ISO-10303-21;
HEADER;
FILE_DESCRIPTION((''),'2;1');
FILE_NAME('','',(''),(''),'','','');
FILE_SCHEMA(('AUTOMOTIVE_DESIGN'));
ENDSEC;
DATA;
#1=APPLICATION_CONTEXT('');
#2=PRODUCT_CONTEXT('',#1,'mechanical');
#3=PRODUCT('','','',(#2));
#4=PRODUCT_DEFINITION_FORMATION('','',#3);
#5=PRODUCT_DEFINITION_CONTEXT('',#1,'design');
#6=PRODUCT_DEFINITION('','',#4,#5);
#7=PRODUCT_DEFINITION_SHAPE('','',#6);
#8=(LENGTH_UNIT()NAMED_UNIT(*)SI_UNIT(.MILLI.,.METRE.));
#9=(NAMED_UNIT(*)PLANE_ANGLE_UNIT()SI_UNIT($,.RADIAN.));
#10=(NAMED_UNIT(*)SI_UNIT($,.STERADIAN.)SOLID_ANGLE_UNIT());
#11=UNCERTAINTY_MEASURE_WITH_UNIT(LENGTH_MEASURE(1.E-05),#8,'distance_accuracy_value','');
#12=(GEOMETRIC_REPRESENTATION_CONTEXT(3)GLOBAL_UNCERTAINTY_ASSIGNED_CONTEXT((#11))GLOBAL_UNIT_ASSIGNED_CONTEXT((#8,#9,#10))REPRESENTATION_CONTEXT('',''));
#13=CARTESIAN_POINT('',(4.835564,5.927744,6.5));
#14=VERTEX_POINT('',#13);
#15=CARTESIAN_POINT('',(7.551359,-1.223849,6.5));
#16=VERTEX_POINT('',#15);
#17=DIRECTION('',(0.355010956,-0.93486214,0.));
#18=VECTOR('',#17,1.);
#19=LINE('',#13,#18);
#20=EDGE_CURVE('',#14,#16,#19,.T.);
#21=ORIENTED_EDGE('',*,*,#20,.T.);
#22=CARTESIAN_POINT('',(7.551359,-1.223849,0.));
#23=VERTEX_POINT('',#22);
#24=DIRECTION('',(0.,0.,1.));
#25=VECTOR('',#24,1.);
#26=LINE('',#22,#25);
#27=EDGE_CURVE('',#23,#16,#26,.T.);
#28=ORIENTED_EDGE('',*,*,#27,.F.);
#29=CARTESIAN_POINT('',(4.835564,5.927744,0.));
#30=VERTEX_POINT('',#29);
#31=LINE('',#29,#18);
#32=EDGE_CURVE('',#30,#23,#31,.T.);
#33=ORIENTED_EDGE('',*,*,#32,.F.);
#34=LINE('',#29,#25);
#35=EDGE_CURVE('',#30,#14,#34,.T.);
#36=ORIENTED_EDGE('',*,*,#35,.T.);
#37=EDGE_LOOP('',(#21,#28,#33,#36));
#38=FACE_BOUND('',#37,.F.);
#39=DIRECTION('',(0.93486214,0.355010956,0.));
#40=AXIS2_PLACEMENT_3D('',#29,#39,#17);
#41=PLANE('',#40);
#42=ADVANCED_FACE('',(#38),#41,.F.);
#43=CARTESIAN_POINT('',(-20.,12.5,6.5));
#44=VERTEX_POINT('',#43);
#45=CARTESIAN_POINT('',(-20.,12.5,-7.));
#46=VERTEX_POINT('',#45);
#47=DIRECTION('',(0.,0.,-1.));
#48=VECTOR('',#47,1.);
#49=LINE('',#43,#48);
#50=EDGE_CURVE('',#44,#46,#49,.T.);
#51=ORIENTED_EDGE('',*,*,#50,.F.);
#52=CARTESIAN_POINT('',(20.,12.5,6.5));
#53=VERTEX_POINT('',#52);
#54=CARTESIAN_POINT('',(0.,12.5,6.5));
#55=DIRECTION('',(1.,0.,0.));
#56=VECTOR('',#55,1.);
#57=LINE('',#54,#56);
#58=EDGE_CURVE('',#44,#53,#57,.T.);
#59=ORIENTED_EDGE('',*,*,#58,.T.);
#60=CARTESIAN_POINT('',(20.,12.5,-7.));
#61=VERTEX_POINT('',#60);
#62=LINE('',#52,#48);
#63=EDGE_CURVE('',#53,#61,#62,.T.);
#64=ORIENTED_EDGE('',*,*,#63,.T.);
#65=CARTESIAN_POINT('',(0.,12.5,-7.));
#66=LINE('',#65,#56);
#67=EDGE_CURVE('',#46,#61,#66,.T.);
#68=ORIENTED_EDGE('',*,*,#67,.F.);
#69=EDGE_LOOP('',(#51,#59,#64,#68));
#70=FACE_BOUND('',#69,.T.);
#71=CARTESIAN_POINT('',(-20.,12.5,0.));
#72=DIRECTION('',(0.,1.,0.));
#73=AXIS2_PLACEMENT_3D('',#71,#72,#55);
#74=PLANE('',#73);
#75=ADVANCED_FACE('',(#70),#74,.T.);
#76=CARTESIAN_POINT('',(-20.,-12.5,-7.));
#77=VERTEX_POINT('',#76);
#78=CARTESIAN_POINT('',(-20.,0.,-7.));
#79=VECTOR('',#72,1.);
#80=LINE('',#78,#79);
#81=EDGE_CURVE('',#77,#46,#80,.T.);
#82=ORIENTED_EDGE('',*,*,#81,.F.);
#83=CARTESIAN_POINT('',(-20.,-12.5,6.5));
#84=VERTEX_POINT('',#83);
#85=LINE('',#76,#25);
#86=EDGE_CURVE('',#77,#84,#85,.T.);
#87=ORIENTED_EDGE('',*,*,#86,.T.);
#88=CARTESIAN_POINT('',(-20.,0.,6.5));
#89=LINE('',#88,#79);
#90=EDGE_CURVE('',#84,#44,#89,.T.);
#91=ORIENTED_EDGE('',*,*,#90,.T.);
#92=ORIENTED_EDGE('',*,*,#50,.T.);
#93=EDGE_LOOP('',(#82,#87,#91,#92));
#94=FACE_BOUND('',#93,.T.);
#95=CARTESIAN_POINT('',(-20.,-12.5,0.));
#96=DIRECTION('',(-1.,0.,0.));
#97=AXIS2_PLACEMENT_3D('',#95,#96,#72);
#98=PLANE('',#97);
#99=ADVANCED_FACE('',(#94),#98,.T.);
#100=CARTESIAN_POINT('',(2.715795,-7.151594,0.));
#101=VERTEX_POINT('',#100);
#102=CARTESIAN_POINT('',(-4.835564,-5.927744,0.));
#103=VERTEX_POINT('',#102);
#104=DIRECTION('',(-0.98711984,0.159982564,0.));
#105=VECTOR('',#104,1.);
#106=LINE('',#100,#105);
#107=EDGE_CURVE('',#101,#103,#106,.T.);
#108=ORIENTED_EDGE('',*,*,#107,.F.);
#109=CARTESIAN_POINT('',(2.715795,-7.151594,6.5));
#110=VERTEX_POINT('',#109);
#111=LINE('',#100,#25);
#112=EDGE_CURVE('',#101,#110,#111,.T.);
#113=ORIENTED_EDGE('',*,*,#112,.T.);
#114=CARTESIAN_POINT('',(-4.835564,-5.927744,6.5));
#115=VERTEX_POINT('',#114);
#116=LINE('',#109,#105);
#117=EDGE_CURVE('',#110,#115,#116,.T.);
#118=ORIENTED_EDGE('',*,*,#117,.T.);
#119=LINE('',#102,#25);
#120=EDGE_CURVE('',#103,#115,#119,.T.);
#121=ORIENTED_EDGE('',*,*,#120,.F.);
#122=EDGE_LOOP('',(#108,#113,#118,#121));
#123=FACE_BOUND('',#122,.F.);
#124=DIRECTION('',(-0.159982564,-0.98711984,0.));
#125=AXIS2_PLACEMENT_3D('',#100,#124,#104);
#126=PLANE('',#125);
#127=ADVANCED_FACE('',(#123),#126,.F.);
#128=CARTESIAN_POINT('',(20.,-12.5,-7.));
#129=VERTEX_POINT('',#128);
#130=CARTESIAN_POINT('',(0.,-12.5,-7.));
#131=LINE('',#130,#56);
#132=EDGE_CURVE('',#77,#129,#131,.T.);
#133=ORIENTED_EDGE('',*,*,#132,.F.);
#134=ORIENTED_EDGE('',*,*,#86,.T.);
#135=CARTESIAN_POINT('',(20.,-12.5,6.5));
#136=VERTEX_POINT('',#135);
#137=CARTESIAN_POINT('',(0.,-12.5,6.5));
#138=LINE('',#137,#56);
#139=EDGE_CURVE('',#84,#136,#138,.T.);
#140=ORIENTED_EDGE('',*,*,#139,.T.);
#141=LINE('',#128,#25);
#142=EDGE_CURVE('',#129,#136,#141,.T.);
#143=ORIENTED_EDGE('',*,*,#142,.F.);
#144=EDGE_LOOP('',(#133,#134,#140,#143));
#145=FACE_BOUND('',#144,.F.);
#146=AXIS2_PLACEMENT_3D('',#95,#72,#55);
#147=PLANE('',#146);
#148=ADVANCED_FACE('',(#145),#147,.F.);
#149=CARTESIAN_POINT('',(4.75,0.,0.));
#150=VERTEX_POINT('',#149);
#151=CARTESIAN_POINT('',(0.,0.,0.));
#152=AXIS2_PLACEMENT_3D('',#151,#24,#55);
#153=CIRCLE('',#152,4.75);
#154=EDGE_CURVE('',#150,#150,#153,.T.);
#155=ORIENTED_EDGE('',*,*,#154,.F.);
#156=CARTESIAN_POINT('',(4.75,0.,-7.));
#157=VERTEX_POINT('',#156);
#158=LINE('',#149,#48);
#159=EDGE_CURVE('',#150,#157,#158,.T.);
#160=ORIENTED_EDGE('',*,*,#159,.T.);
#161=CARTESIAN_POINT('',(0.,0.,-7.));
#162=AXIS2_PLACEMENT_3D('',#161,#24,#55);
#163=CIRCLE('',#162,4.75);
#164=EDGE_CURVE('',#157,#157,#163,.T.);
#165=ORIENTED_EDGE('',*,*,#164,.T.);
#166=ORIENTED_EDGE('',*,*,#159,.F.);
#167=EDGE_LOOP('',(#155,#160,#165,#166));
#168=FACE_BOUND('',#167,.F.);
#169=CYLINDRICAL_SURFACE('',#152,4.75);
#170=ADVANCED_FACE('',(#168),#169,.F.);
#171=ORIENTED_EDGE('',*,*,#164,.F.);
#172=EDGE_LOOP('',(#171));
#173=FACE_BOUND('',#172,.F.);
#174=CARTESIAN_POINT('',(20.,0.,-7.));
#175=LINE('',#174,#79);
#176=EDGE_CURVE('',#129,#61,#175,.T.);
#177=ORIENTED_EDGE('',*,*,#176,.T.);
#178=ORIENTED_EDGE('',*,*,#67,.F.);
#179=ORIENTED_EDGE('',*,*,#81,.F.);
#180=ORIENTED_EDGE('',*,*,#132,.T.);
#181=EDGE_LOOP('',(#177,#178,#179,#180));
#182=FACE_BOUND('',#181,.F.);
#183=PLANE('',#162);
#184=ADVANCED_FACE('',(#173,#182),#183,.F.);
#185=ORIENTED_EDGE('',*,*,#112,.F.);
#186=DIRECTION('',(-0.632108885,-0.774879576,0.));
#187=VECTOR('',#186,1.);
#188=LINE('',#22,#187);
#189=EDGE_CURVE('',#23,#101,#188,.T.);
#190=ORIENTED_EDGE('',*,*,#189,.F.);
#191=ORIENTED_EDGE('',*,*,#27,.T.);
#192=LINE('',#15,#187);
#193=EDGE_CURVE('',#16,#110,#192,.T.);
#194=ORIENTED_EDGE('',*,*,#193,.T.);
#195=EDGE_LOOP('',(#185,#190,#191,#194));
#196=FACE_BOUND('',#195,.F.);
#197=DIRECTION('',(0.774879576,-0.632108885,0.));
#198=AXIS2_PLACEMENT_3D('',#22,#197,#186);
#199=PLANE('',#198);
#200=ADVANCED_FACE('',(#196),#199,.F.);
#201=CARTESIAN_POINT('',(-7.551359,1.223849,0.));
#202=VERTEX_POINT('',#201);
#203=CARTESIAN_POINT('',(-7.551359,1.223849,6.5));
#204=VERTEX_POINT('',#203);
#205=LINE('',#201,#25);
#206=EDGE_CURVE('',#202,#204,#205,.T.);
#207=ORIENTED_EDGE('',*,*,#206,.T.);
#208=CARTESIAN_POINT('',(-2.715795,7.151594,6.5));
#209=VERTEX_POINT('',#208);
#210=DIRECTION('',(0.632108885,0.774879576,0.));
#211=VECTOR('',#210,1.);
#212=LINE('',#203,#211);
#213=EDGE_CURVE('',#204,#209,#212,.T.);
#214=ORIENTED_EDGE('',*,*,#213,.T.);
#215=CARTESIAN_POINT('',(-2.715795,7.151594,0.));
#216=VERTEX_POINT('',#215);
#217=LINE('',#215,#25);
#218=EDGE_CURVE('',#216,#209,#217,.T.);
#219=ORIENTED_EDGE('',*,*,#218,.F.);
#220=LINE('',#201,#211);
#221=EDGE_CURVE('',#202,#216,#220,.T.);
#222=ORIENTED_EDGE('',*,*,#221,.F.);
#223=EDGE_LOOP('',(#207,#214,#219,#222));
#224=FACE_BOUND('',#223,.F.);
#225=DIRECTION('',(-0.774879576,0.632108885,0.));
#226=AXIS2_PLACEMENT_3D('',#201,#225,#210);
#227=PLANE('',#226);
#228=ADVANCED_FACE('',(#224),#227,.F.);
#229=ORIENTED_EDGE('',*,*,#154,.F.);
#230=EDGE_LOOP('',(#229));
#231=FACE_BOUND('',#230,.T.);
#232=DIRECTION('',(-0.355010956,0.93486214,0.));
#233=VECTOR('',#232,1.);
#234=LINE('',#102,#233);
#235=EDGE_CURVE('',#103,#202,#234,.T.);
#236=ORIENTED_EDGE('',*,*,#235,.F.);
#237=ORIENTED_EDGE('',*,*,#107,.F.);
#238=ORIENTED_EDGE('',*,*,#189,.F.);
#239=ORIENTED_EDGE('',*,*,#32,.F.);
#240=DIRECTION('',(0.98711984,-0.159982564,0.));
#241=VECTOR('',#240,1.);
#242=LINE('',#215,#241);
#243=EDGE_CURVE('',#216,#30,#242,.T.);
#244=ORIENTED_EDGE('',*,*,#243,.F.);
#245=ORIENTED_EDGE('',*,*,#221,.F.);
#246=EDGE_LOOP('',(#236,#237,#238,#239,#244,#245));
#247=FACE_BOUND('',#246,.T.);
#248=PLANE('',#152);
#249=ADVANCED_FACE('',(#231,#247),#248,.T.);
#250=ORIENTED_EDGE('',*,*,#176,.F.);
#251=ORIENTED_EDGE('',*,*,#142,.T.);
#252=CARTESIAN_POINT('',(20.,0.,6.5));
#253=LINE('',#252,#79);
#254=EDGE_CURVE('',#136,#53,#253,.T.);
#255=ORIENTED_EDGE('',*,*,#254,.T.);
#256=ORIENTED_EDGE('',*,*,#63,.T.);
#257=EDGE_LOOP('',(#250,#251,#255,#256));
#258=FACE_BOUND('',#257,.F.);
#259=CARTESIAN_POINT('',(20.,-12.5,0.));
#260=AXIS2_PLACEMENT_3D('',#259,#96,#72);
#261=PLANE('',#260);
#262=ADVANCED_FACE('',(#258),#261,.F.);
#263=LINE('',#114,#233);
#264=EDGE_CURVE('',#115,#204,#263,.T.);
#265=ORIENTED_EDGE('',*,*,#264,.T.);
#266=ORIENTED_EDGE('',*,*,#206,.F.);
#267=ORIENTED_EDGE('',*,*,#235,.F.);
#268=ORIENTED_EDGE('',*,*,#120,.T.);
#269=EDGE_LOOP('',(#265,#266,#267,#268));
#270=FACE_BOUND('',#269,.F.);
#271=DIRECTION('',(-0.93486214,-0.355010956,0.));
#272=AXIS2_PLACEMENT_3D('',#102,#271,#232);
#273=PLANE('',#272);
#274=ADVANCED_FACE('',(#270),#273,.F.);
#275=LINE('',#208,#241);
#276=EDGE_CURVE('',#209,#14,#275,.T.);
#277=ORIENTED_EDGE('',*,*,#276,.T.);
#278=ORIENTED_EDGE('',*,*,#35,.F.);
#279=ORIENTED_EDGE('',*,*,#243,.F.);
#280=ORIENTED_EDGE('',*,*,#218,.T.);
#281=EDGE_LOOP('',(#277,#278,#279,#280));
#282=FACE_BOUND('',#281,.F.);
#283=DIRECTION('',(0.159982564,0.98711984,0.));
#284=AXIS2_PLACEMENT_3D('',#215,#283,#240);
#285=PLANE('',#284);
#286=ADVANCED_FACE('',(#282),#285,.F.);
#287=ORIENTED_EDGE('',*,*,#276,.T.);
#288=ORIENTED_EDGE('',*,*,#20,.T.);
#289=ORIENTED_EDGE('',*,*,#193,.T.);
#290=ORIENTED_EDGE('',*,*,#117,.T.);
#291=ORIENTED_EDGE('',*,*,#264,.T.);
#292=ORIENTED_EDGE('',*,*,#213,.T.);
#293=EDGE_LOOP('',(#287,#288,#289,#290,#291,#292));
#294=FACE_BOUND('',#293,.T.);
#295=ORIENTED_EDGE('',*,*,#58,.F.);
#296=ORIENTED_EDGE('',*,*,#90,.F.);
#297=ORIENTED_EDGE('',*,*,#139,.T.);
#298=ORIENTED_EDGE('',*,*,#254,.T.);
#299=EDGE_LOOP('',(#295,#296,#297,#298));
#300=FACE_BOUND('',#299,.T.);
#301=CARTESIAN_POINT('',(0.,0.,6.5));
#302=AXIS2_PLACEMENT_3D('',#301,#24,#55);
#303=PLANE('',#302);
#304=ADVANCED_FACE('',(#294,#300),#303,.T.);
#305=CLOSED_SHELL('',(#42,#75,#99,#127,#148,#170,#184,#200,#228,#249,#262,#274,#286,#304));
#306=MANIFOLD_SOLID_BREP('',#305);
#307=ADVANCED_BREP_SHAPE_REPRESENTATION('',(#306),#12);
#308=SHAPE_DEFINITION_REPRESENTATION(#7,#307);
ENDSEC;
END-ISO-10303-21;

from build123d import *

# Parameters (mm, degrees)
F0_W     = 40
F0_H     = 25
F1_DEPTH = 7
F3_DEPTH = 6.5
F4_R     = 4.75
F5_DEPTH = 10


# Not quite as in the source:
# - a feature names something its author has since deleted; it is built from what else it names


with BuildPart() as f1:
    # F0 (on Top) → F1 (new body)
    with BuildSketch(Plane.XY):
        Rectangle(F0_W, F0_H)
        Polygon((-2.7157951384, 7.1515935357), (4.8355641102, 5.9277443492), (7.5513592486, -1.2238491865), (2.7157951384, -7.1515935357), (-4.8355641102, -5.9277443492), (-7.5513592486, 1.2238491865), align=None, mode=Mode.SUBTRACT)
        Polygon((7.5513592486, -1.2238491865), (4.8355641102, 5.9277443492), (-2.7157951384, 7.1515935357), (-7.5513592486, 1.2238491865), (-4.8355641102, -5.9277443492), (2.7157951384, -7.1515935357), align=None)
    extrude(amount=-F1_DEPTH)

    # F0 (on Top) → F3 (join)
    with BuildSketch(Plane.XY):
        Rectangle(F0_W, F0_H)
        Polygon((-2.7157951384, 7.1515935357), (4.8355641102, 5.9277443492), (7.5513592486, -1.2238491865), (2.7157951384, -7.1515935357), (-4.8355641102, -5.9277443492), (-7.5513592486, 1.2238491865), align=None, mode=Mode.SUBTRACT)
    extrude(amount=F3_DEPTH)

    # F4 (on Top) → F5 (cut)
    with BuildSketch(Plane.XY):
        Circle(F4_R)
    extrude(amount=-F5_DEPTH, mode=Mode.SUBTRACT)


solid = f1.part
